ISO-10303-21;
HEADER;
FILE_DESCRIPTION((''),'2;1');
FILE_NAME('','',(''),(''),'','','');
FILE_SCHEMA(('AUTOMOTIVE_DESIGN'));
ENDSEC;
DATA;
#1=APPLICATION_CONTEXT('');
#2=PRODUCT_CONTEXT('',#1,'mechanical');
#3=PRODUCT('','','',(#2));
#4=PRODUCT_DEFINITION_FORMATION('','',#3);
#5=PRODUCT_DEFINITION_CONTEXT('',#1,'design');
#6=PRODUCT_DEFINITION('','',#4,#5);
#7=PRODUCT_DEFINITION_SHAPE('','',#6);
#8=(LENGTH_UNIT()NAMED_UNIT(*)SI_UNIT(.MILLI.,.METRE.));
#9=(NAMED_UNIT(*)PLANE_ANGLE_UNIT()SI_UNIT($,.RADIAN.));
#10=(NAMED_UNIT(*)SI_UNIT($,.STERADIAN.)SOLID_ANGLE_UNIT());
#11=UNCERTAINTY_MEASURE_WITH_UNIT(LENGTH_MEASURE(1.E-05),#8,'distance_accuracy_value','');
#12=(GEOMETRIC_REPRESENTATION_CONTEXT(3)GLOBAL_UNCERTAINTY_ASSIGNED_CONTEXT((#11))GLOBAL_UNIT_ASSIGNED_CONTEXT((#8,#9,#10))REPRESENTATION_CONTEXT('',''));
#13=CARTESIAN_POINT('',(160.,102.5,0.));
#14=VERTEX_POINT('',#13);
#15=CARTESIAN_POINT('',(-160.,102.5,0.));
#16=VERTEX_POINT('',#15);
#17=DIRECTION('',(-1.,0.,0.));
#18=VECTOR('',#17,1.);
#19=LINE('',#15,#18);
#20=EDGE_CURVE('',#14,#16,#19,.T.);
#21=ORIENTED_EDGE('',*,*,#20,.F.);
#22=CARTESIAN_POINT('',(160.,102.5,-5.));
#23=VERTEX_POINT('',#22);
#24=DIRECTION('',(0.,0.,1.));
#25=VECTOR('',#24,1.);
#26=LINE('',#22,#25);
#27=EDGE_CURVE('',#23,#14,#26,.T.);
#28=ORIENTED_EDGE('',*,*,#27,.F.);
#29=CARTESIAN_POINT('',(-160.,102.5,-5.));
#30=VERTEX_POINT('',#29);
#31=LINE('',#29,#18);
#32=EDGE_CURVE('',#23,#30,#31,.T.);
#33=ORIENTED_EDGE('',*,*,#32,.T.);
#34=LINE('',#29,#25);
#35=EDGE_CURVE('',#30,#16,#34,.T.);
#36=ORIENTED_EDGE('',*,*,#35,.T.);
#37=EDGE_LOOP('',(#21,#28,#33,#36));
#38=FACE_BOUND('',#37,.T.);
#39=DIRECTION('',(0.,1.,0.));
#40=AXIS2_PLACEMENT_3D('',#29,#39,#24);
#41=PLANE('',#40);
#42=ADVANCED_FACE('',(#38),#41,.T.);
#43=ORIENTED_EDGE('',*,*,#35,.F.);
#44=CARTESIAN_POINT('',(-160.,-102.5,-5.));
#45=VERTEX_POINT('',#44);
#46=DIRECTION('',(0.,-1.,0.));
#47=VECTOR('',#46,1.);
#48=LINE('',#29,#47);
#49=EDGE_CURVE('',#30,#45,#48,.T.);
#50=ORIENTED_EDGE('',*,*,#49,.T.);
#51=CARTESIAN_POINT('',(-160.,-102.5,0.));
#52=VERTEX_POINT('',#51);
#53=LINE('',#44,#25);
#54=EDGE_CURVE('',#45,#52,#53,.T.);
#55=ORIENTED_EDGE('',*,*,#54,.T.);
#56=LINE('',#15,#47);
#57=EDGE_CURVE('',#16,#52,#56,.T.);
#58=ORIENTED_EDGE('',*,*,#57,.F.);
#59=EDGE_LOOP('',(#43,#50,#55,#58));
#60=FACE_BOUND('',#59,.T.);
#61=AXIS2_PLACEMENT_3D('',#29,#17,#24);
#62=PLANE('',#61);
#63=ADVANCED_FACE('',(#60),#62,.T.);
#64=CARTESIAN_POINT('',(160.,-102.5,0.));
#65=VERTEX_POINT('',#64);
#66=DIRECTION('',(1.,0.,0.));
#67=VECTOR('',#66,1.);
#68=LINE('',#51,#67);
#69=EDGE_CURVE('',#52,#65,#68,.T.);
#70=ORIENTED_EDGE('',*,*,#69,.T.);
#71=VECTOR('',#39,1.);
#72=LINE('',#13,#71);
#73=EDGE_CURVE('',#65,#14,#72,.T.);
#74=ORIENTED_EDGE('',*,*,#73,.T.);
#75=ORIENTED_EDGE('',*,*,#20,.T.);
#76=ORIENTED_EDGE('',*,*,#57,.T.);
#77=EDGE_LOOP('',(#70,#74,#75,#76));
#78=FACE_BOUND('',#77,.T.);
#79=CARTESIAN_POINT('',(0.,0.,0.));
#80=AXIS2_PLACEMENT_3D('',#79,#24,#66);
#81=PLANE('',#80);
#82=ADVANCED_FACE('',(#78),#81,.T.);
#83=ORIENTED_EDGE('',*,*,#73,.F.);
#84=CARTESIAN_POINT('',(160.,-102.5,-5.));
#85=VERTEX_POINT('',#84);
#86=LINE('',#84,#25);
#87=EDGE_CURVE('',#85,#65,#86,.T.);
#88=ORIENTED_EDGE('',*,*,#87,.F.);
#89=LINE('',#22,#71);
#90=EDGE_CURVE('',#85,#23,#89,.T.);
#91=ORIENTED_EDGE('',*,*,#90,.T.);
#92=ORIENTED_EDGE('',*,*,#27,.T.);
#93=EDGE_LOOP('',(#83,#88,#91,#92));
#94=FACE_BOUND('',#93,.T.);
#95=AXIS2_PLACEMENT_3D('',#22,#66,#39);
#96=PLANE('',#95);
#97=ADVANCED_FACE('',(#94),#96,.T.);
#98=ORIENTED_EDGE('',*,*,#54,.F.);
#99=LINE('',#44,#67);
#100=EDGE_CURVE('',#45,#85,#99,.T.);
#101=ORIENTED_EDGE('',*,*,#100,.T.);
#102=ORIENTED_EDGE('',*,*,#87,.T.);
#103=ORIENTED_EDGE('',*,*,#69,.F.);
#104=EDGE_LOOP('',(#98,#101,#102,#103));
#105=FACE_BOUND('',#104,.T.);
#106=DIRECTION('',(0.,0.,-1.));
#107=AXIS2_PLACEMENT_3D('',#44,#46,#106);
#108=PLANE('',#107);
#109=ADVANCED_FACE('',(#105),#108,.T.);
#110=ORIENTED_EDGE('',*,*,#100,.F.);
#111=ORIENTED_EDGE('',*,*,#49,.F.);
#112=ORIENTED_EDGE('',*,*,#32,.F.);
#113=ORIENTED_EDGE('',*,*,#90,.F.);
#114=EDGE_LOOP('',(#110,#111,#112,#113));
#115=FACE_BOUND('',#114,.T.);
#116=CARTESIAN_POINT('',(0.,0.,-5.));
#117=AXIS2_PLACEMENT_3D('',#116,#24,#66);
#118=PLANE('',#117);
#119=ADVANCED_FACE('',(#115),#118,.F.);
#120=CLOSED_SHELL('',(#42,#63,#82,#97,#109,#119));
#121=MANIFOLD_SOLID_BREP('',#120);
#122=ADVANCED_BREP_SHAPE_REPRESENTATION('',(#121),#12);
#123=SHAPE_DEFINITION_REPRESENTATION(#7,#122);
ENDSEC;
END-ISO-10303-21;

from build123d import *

# Parameters (mm, degrees)
SKETCH1_W          = 320
SKETCH1_H          = 205
BASE_FLANGE1_DEPTH = 5


# Sheet-metal steps are written as plain solids
with BuildPart() as part:
    # Sketch1 → Base-Flange1 (new body)
    with BuildSketch(Plane.XY):
        Rectangle(SKETCH1_W, SKETCH1_H)
    extrude(amount=-BASE_FLANGE1_DEPTH)


solid = part.part
